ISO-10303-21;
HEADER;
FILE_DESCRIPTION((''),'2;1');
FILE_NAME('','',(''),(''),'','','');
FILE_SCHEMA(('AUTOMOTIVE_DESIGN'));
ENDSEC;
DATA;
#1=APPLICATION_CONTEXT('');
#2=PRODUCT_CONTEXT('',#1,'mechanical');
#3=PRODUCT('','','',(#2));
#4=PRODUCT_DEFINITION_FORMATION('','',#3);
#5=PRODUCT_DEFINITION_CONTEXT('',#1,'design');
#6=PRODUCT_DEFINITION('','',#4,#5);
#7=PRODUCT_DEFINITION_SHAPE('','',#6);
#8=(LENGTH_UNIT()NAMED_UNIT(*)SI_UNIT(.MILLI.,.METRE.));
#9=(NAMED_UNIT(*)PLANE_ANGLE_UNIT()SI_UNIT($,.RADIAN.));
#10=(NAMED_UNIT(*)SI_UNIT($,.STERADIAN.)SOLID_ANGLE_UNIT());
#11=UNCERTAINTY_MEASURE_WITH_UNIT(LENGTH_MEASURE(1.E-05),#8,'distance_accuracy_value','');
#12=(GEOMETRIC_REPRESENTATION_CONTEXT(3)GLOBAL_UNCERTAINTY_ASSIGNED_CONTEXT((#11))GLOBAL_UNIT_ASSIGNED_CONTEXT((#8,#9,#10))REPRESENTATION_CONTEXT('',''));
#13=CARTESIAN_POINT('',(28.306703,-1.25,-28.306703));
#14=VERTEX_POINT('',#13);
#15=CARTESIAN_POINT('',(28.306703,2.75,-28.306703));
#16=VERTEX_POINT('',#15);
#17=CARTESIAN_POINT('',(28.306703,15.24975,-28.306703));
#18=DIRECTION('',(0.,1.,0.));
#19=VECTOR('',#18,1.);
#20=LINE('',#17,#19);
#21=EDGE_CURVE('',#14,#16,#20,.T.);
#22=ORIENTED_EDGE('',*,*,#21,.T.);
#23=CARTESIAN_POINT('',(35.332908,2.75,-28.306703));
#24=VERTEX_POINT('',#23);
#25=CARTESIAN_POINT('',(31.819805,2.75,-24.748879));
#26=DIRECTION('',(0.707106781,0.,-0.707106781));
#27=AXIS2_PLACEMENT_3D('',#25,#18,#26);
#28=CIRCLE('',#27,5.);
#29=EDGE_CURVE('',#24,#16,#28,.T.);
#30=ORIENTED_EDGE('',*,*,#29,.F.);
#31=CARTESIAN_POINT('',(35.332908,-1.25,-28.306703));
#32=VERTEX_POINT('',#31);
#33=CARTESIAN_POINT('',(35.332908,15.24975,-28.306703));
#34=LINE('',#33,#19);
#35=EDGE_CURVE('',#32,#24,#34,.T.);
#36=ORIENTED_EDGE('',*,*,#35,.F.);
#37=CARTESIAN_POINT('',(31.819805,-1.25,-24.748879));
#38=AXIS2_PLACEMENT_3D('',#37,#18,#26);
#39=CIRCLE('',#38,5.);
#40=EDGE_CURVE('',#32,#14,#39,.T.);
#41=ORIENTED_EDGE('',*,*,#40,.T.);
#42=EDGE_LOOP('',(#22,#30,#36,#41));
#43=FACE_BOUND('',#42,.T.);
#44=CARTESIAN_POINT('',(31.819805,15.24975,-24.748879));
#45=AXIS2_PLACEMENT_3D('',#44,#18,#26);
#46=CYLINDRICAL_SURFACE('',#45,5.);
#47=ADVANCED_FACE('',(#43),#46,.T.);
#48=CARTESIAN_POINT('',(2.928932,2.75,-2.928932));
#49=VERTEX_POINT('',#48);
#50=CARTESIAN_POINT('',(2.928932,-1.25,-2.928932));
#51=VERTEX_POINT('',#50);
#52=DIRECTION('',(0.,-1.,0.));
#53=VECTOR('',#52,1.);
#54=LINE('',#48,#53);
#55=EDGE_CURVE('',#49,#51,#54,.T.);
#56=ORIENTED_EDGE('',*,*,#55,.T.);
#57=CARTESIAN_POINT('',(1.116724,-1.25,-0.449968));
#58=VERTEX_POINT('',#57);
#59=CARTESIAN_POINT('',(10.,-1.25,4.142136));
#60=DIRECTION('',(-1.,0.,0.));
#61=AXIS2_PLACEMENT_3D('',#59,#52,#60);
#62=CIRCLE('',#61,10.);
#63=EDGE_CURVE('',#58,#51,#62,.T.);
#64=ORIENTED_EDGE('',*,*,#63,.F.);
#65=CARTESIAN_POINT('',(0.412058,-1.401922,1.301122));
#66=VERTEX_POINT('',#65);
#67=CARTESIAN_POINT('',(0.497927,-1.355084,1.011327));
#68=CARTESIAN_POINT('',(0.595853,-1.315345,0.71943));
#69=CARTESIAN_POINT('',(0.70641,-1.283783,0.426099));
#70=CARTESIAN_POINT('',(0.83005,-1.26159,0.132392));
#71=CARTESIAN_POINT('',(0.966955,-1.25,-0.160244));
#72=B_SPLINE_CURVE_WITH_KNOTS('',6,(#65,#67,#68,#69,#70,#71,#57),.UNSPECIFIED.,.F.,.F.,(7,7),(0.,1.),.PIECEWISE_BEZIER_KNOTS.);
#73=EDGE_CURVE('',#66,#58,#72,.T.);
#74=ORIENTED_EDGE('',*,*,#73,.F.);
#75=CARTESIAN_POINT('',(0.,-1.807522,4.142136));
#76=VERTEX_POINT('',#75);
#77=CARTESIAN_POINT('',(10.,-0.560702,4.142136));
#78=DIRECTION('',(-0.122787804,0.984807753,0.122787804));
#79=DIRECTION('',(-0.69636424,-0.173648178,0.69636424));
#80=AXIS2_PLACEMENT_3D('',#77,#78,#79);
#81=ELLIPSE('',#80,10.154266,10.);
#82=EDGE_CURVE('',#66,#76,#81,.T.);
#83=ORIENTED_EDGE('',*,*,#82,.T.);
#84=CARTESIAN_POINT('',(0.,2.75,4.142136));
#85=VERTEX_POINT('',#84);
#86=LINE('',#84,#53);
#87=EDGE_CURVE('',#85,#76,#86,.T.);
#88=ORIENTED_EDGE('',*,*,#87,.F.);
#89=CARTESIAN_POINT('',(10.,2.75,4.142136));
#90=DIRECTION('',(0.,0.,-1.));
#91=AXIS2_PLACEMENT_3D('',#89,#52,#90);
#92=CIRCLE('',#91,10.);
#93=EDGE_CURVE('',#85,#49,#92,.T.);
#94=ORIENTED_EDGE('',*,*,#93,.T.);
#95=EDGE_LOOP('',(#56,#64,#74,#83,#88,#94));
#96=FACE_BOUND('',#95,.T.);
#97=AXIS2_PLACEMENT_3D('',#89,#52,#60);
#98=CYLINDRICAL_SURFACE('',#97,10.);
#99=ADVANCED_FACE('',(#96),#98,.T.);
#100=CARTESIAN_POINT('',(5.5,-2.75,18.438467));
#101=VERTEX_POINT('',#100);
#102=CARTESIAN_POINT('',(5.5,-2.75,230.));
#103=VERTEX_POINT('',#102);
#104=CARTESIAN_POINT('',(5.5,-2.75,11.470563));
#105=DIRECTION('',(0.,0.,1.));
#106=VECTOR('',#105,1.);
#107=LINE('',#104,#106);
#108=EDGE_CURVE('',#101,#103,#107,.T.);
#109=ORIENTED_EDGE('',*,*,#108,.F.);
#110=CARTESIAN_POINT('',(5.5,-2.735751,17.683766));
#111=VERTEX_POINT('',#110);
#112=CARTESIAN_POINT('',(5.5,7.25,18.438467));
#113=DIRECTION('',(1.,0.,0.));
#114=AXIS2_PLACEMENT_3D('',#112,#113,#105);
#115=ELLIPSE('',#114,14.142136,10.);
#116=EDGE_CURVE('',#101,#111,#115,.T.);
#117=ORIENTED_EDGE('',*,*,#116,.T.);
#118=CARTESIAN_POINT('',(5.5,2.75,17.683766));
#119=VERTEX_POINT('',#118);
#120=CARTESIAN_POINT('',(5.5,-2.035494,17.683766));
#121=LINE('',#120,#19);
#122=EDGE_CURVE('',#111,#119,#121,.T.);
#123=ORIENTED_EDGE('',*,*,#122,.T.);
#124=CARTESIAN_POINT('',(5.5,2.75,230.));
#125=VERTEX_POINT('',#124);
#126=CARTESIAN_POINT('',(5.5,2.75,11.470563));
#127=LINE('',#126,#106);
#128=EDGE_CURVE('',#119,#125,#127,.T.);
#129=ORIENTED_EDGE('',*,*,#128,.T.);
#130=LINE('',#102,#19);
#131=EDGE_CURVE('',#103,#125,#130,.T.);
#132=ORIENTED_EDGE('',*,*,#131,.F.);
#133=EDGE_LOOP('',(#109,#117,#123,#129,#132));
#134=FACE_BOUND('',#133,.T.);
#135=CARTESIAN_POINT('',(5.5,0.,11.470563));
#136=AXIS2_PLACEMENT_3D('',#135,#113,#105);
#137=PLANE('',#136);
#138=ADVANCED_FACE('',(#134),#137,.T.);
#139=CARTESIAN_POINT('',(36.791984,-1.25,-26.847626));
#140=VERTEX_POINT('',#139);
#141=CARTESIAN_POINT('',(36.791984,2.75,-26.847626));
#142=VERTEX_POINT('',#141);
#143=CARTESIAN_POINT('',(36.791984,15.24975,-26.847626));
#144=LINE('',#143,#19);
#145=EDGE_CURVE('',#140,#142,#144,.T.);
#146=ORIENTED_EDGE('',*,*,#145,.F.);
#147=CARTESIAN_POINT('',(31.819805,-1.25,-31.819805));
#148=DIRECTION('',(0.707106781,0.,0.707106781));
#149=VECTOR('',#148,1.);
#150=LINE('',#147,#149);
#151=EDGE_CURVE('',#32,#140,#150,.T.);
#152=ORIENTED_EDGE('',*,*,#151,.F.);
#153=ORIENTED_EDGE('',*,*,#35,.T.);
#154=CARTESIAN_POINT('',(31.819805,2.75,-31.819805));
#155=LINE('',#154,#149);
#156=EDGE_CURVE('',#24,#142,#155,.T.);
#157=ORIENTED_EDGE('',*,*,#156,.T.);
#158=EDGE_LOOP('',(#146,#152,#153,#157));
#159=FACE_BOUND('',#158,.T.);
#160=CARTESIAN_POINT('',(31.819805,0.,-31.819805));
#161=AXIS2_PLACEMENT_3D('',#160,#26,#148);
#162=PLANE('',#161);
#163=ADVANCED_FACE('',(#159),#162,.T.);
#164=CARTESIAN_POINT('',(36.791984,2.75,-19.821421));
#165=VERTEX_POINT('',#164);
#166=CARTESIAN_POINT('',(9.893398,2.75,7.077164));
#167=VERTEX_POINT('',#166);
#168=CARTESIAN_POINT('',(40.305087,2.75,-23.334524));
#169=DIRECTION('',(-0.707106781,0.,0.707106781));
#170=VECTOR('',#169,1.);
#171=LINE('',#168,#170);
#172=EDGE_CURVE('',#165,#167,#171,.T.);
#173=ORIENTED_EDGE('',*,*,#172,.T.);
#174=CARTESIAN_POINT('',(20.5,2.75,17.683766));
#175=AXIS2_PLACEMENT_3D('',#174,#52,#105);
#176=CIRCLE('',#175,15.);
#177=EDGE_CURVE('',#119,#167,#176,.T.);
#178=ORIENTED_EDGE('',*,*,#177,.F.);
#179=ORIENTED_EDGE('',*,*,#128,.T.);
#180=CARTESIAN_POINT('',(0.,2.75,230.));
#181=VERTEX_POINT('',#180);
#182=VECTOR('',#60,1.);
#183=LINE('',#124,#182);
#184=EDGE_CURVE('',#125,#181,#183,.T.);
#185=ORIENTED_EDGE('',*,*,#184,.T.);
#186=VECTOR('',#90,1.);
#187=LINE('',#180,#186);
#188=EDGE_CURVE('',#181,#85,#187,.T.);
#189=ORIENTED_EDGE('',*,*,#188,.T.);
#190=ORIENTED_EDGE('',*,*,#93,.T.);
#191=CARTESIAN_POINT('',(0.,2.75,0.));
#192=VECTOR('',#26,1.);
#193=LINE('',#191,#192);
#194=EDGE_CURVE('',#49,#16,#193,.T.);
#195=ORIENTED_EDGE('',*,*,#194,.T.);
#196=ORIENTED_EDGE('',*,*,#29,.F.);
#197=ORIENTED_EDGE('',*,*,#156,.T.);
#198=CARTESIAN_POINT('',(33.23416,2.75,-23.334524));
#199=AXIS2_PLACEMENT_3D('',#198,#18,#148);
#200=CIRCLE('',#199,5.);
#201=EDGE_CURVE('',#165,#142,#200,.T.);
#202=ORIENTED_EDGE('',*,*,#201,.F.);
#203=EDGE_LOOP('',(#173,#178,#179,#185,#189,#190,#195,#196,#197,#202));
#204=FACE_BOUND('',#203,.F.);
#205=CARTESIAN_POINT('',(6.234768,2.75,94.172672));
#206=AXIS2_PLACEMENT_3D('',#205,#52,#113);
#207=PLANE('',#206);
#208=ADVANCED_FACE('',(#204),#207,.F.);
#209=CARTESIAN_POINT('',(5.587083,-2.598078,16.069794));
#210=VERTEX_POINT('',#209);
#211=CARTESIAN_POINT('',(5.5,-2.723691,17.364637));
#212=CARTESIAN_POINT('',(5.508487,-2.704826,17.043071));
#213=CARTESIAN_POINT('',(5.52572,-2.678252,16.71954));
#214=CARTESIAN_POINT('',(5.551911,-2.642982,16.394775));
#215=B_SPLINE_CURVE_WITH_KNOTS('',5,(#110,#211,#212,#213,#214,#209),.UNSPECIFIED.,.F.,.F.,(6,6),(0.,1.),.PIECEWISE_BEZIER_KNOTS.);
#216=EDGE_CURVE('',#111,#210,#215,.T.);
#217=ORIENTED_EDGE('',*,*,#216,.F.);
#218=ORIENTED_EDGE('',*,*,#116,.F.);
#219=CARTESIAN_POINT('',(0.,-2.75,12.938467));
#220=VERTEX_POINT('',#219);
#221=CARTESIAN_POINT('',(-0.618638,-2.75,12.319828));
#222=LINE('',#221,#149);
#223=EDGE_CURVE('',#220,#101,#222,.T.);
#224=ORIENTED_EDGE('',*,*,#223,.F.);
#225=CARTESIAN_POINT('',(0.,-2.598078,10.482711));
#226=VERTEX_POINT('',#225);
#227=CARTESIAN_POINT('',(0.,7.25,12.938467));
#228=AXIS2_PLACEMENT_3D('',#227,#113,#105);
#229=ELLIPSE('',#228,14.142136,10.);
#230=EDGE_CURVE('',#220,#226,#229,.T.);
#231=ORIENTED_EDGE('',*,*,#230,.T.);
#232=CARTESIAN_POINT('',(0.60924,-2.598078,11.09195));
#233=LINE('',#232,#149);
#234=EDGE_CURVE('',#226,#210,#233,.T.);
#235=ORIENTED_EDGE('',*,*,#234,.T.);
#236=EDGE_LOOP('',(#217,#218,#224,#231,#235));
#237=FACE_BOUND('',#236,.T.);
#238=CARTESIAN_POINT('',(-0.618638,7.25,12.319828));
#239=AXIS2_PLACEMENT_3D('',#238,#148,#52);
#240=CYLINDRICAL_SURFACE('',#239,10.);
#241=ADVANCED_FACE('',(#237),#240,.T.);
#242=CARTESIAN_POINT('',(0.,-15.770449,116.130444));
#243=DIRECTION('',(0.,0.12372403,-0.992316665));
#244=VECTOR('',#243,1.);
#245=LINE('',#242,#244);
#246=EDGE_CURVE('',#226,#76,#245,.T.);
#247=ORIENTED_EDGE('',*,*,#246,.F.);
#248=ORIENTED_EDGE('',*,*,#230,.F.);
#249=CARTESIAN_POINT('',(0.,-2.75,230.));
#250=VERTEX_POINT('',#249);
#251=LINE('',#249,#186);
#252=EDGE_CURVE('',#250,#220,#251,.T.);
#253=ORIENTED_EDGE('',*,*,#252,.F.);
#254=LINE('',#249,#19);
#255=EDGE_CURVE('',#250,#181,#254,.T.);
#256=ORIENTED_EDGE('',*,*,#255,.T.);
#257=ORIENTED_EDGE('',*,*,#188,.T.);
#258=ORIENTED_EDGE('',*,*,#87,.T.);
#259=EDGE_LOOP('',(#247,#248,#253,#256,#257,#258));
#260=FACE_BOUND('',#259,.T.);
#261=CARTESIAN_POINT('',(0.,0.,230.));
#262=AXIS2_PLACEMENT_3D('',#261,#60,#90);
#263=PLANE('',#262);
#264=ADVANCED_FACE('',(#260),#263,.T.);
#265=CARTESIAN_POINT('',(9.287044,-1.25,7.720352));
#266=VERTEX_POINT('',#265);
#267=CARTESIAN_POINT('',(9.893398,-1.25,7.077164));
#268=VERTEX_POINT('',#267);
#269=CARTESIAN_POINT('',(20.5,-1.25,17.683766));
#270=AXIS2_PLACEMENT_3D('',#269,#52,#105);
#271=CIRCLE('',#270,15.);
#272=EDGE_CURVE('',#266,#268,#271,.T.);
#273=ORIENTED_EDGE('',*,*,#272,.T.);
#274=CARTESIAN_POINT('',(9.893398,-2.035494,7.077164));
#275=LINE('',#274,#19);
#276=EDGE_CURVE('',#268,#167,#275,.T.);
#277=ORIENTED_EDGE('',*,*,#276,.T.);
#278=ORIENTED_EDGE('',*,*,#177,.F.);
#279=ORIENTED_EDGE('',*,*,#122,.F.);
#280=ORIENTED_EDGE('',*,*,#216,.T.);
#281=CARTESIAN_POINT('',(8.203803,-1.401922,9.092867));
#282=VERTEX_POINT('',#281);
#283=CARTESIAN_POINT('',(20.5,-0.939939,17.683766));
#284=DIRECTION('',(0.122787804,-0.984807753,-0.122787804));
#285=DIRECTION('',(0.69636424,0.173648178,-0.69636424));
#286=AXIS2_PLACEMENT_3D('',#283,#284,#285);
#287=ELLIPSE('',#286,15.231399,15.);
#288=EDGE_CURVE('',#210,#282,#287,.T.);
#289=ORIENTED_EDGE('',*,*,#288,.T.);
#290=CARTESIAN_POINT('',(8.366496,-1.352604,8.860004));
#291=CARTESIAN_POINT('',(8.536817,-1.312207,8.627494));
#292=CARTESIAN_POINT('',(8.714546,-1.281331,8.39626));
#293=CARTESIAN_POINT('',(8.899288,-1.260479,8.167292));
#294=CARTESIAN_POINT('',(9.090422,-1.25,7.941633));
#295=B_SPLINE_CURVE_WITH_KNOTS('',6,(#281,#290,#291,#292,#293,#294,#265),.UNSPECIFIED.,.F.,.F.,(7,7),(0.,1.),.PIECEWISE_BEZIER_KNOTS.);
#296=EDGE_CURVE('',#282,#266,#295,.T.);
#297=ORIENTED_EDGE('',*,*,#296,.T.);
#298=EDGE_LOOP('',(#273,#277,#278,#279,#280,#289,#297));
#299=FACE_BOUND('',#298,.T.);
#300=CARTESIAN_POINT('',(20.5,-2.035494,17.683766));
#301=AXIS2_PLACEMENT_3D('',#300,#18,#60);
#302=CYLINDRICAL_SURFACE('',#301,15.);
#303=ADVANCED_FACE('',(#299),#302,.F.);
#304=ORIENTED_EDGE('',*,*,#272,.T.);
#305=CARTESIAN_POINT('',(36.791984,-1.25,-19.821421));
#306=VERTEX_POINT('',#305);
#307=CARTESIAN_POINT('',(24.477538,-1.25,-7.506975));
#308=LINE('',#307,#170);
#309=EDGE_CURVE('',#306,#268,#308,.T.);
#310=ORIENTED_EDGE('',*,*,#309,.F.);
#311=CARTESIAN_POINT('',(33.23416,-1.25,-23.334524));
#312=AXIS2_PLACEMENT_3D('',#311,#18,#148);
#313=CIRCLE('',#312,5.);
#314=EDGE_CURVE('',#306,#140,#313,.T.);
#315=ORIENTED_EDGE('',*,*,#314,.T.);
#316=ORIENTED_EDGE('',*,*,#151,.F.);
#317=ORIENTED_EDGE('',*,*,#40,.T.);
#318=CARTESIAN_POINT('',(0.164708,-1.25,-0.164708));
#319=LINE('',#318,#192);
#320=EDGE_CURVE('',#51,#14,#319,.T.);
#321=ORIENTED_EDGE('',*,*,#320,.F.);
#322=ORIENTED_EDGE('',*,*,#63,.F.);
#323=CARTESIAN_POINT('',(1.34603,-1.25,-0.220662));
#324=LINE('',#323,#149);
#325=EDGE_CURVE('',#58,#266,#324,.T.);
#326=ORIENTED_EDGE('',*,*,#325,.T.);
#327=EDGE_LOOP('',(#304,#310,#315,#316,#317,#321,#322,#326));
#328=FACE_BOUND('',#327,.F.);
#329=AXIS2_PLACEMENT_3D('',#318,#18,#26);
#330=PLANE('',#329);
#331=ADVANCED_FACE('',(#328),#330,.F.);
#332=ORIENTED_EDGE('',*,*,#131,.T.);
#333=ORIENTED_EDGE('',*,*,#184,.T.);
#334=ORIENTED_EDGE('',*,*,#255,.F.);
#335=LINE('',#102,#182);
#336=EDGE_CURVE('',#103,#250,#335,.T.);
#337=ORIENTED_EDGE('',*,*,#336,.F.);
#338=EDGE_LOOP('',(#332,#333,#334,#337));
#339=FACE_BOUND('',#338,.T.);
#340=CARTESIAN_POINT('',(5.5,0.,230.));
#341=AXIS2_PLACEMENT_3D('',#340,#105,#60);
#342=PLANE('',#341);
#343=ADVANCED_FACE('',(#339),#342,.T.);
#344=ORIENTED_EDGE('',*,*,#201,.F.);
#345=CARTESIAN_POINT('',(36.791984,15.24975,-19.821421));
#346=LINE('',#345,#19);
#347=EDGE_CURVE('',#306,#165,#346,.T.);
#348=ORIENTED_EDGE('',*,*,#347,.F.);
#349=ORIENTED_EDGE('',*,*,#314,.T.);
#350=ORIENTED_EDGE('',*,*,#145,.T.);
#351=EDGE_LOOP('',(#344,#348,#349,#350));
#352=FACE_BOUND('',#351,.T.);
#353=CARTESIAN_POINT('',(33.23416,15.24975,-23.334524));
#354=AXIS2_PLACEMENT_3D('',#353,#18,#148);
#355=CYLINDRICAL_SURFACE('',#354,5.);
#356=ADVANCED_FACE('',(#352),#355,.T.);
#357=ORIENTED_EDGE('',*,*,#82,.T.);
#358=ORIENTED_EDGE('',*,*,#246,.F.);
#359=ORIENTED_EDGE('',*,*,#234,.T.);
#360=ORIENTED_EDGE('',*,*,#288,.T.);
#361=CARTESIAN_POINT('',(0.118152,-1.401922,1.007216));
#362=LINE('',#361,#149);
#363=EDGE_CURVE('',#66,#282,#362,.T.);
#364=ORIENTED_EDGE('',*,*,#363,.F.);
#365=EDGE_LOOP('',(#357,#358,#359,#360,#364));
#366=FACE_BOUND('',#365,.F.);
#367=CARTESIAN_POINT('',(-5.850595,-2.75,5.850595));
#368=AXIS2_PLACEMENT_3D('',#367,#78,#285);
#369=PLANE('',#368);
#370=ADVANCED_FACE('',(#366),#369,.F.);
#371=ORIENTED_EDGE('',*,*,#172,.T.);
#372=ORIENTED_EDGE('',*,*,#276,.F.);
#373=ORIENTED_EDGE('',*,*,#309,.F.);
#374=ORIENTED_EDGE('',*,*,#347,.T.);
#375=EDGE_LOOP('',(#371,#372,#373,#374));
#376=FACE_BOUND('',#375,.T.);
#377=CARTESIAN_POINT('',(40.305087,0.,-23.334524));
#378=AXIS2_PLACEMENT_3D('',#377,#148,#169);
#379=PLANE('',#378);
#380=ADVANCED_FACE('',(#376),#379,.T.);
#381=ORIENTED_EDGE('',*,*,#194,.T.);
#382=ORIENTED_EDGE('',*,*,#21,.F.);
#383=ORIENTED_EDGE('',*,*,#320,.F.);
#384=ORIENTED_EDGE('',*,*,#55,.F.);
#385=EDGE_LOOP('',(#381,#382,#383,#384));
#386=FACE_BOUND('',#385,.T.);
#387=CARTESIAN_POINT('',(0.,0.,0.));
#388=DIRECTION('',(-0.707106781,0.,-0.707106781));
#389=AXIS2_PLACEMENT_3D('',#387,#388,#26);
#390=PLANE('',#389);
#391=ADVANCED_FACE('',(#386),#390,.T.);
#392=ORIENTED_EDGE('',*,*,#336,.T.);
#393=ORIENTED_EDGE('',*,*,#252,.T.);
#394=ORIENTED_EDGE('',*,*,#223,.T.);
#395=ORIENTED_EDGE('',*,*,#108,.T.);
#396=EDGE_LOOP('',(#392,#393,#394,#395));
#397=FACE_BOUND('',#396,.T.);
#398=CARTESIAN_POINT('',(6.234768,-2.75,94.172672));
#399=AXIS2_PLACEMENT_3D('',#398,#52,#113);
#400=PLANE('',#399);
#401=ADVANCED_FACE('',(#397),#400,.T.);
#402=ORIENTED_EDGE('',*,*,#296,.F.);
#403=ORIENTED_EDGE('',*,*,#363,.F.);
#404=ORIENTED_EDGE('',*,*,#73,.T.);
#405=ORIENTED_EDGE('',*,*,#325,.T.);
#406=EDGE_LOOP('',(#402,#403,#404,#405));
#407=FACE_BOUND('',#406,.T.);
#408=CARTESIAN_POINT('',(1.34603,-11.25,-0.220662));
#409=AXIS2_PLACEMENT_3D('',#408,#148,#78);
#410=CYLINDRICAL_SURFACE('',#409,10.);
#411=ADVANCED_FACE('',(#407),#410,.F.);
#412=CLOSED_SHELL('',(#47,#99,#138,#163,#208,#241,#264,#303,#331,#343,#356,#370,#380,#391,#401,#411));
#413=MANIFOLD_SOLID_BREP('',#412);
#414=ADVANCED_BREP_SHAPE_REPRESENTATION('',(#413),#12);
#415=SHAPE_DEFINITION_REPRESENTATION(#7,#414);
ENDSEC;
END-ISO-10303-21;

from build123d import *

# Parameters (mm, degrees)
F1_DEPTH    = 2.75
F2_T1_DEPTH = 30.499500005
F3_R        = 10
F6_DEPTH    = 31.7539349198
F7_R        = 15
F8_R        = 10


# Not quite as in the source:
# - a fillet or chamfer that OpenCascade refuses, or shapes differently, is made with other operations: its cross-section is extruded or revolved along the edge and cut away or added


with BuildPart() as f1:
    # F0 (on Front) → F1 (new body, symmetric)
    with BuildSketch(Plane.XZ):
        Polygon((0, 230), (0, 0), (31.8198051534, -31.8198051534), (40.3050865276, -23.3345237792), (5.5, 11.4705627485), (5.5, 230), align=None)
    extrude(amount=F1_DEPTH, both=True)

    # F2: fillet of radius 5 on 2 edges, made by hand

    # F2_s2 → F2_t1 (cut)
    with BuildSketch(Plane.XZ.offset(-15.2497500025)):
        with BuildLine():
            ThreePointArc((35.3553390593, -28.2844126688), (31.8198051534, -29.7488787629), (28.2842712475, -28.2844126688))
            Line((28.2842712475, -28.2844126688), (28.2135605693, -28.3551233469))
            ThreePointArc((28.2135605693, -28.3551233469), (29.9813628776, -30.1227842339), (31.7490944753, -31.8905158315))
            Line((31.7490944753, -31.8905158315), (31.8905158315, -31.8905158315))
            ThreePointArc((31.8905158315, -31.8905158315), (33.6582474291, -30.1227842339), (35.4260497374, -28.3551233469))
            Line((35.4260497374, -28.3551233469), (35.3553390593, -28.2844126688))
        make_face()
        with BuildLine():
            ThreePointArc((36.7696940431, -19.7989898732), (38.2341601371, -23.3345237792), (36.7696940431, -26.8700576851))
            Line((36.7696940431, -26.8700576851), (36.8404047212, -26.9407683632))
            ThreePointArc((36.8404047212, -26.9407683632), (38.6080656081, -25.1729660549), (40.3757972058, -23.4052344573))
            Line((40.3757972058, -23.4052344573), (40.3757972058, -23.263813101))
            ThreePointArc((40.3757972058, -23.263813101), (38.6080656081, -21.4960815034), (36.8404047212, -19.7282791951))
            Line((36.8404047212, -19.7282791951), (36.7696940431, -19.7989898732))
        make_face()
    extrude(amount=F2_T1_DEPTH, mode=Mode.SUBTRACT)

    # F3
    f3_edges = [f1.edges().sort_by_distance(p)[0] for p in [
        (0, 0, 0),
    ]]
    fillet(f3_edges, radius=F3_R)

    # F5 (on offset) → F6 (cut)
    with BuildSketch(Plane(origin=(0, 0, 0), x_dir=(0.7071067812, 0, -0.7071067812), z_dir=(-0.7071067812, 0, -0.7071067812))):
        Polygon((40, 2.75), (-8.2739908248, 2.75), (0.2329319046, 1.25), (45, 1.25), (45, 2.75), align=None)
    extrude(amount=-F6_DEPTH, mode=Mode.SUBTRACT)

    # F7
    f7_edges = [f1.edges().sort_by_distance(p)[0] for p in [
        (5.5, 0.357253, 11.470563),
    ]]
    fillet(f7_edges, radius=F7_R)

    # F8
    f8_edges = [f1.edges().sort_by_distance(p)[0] for p in [
        (2.753762, -2.75, 14.454952),
        (4.725257, -1.25, 4.395842),
    ]]
    fillet(f8_edges, radius=F8_R)


solid = f1.part
